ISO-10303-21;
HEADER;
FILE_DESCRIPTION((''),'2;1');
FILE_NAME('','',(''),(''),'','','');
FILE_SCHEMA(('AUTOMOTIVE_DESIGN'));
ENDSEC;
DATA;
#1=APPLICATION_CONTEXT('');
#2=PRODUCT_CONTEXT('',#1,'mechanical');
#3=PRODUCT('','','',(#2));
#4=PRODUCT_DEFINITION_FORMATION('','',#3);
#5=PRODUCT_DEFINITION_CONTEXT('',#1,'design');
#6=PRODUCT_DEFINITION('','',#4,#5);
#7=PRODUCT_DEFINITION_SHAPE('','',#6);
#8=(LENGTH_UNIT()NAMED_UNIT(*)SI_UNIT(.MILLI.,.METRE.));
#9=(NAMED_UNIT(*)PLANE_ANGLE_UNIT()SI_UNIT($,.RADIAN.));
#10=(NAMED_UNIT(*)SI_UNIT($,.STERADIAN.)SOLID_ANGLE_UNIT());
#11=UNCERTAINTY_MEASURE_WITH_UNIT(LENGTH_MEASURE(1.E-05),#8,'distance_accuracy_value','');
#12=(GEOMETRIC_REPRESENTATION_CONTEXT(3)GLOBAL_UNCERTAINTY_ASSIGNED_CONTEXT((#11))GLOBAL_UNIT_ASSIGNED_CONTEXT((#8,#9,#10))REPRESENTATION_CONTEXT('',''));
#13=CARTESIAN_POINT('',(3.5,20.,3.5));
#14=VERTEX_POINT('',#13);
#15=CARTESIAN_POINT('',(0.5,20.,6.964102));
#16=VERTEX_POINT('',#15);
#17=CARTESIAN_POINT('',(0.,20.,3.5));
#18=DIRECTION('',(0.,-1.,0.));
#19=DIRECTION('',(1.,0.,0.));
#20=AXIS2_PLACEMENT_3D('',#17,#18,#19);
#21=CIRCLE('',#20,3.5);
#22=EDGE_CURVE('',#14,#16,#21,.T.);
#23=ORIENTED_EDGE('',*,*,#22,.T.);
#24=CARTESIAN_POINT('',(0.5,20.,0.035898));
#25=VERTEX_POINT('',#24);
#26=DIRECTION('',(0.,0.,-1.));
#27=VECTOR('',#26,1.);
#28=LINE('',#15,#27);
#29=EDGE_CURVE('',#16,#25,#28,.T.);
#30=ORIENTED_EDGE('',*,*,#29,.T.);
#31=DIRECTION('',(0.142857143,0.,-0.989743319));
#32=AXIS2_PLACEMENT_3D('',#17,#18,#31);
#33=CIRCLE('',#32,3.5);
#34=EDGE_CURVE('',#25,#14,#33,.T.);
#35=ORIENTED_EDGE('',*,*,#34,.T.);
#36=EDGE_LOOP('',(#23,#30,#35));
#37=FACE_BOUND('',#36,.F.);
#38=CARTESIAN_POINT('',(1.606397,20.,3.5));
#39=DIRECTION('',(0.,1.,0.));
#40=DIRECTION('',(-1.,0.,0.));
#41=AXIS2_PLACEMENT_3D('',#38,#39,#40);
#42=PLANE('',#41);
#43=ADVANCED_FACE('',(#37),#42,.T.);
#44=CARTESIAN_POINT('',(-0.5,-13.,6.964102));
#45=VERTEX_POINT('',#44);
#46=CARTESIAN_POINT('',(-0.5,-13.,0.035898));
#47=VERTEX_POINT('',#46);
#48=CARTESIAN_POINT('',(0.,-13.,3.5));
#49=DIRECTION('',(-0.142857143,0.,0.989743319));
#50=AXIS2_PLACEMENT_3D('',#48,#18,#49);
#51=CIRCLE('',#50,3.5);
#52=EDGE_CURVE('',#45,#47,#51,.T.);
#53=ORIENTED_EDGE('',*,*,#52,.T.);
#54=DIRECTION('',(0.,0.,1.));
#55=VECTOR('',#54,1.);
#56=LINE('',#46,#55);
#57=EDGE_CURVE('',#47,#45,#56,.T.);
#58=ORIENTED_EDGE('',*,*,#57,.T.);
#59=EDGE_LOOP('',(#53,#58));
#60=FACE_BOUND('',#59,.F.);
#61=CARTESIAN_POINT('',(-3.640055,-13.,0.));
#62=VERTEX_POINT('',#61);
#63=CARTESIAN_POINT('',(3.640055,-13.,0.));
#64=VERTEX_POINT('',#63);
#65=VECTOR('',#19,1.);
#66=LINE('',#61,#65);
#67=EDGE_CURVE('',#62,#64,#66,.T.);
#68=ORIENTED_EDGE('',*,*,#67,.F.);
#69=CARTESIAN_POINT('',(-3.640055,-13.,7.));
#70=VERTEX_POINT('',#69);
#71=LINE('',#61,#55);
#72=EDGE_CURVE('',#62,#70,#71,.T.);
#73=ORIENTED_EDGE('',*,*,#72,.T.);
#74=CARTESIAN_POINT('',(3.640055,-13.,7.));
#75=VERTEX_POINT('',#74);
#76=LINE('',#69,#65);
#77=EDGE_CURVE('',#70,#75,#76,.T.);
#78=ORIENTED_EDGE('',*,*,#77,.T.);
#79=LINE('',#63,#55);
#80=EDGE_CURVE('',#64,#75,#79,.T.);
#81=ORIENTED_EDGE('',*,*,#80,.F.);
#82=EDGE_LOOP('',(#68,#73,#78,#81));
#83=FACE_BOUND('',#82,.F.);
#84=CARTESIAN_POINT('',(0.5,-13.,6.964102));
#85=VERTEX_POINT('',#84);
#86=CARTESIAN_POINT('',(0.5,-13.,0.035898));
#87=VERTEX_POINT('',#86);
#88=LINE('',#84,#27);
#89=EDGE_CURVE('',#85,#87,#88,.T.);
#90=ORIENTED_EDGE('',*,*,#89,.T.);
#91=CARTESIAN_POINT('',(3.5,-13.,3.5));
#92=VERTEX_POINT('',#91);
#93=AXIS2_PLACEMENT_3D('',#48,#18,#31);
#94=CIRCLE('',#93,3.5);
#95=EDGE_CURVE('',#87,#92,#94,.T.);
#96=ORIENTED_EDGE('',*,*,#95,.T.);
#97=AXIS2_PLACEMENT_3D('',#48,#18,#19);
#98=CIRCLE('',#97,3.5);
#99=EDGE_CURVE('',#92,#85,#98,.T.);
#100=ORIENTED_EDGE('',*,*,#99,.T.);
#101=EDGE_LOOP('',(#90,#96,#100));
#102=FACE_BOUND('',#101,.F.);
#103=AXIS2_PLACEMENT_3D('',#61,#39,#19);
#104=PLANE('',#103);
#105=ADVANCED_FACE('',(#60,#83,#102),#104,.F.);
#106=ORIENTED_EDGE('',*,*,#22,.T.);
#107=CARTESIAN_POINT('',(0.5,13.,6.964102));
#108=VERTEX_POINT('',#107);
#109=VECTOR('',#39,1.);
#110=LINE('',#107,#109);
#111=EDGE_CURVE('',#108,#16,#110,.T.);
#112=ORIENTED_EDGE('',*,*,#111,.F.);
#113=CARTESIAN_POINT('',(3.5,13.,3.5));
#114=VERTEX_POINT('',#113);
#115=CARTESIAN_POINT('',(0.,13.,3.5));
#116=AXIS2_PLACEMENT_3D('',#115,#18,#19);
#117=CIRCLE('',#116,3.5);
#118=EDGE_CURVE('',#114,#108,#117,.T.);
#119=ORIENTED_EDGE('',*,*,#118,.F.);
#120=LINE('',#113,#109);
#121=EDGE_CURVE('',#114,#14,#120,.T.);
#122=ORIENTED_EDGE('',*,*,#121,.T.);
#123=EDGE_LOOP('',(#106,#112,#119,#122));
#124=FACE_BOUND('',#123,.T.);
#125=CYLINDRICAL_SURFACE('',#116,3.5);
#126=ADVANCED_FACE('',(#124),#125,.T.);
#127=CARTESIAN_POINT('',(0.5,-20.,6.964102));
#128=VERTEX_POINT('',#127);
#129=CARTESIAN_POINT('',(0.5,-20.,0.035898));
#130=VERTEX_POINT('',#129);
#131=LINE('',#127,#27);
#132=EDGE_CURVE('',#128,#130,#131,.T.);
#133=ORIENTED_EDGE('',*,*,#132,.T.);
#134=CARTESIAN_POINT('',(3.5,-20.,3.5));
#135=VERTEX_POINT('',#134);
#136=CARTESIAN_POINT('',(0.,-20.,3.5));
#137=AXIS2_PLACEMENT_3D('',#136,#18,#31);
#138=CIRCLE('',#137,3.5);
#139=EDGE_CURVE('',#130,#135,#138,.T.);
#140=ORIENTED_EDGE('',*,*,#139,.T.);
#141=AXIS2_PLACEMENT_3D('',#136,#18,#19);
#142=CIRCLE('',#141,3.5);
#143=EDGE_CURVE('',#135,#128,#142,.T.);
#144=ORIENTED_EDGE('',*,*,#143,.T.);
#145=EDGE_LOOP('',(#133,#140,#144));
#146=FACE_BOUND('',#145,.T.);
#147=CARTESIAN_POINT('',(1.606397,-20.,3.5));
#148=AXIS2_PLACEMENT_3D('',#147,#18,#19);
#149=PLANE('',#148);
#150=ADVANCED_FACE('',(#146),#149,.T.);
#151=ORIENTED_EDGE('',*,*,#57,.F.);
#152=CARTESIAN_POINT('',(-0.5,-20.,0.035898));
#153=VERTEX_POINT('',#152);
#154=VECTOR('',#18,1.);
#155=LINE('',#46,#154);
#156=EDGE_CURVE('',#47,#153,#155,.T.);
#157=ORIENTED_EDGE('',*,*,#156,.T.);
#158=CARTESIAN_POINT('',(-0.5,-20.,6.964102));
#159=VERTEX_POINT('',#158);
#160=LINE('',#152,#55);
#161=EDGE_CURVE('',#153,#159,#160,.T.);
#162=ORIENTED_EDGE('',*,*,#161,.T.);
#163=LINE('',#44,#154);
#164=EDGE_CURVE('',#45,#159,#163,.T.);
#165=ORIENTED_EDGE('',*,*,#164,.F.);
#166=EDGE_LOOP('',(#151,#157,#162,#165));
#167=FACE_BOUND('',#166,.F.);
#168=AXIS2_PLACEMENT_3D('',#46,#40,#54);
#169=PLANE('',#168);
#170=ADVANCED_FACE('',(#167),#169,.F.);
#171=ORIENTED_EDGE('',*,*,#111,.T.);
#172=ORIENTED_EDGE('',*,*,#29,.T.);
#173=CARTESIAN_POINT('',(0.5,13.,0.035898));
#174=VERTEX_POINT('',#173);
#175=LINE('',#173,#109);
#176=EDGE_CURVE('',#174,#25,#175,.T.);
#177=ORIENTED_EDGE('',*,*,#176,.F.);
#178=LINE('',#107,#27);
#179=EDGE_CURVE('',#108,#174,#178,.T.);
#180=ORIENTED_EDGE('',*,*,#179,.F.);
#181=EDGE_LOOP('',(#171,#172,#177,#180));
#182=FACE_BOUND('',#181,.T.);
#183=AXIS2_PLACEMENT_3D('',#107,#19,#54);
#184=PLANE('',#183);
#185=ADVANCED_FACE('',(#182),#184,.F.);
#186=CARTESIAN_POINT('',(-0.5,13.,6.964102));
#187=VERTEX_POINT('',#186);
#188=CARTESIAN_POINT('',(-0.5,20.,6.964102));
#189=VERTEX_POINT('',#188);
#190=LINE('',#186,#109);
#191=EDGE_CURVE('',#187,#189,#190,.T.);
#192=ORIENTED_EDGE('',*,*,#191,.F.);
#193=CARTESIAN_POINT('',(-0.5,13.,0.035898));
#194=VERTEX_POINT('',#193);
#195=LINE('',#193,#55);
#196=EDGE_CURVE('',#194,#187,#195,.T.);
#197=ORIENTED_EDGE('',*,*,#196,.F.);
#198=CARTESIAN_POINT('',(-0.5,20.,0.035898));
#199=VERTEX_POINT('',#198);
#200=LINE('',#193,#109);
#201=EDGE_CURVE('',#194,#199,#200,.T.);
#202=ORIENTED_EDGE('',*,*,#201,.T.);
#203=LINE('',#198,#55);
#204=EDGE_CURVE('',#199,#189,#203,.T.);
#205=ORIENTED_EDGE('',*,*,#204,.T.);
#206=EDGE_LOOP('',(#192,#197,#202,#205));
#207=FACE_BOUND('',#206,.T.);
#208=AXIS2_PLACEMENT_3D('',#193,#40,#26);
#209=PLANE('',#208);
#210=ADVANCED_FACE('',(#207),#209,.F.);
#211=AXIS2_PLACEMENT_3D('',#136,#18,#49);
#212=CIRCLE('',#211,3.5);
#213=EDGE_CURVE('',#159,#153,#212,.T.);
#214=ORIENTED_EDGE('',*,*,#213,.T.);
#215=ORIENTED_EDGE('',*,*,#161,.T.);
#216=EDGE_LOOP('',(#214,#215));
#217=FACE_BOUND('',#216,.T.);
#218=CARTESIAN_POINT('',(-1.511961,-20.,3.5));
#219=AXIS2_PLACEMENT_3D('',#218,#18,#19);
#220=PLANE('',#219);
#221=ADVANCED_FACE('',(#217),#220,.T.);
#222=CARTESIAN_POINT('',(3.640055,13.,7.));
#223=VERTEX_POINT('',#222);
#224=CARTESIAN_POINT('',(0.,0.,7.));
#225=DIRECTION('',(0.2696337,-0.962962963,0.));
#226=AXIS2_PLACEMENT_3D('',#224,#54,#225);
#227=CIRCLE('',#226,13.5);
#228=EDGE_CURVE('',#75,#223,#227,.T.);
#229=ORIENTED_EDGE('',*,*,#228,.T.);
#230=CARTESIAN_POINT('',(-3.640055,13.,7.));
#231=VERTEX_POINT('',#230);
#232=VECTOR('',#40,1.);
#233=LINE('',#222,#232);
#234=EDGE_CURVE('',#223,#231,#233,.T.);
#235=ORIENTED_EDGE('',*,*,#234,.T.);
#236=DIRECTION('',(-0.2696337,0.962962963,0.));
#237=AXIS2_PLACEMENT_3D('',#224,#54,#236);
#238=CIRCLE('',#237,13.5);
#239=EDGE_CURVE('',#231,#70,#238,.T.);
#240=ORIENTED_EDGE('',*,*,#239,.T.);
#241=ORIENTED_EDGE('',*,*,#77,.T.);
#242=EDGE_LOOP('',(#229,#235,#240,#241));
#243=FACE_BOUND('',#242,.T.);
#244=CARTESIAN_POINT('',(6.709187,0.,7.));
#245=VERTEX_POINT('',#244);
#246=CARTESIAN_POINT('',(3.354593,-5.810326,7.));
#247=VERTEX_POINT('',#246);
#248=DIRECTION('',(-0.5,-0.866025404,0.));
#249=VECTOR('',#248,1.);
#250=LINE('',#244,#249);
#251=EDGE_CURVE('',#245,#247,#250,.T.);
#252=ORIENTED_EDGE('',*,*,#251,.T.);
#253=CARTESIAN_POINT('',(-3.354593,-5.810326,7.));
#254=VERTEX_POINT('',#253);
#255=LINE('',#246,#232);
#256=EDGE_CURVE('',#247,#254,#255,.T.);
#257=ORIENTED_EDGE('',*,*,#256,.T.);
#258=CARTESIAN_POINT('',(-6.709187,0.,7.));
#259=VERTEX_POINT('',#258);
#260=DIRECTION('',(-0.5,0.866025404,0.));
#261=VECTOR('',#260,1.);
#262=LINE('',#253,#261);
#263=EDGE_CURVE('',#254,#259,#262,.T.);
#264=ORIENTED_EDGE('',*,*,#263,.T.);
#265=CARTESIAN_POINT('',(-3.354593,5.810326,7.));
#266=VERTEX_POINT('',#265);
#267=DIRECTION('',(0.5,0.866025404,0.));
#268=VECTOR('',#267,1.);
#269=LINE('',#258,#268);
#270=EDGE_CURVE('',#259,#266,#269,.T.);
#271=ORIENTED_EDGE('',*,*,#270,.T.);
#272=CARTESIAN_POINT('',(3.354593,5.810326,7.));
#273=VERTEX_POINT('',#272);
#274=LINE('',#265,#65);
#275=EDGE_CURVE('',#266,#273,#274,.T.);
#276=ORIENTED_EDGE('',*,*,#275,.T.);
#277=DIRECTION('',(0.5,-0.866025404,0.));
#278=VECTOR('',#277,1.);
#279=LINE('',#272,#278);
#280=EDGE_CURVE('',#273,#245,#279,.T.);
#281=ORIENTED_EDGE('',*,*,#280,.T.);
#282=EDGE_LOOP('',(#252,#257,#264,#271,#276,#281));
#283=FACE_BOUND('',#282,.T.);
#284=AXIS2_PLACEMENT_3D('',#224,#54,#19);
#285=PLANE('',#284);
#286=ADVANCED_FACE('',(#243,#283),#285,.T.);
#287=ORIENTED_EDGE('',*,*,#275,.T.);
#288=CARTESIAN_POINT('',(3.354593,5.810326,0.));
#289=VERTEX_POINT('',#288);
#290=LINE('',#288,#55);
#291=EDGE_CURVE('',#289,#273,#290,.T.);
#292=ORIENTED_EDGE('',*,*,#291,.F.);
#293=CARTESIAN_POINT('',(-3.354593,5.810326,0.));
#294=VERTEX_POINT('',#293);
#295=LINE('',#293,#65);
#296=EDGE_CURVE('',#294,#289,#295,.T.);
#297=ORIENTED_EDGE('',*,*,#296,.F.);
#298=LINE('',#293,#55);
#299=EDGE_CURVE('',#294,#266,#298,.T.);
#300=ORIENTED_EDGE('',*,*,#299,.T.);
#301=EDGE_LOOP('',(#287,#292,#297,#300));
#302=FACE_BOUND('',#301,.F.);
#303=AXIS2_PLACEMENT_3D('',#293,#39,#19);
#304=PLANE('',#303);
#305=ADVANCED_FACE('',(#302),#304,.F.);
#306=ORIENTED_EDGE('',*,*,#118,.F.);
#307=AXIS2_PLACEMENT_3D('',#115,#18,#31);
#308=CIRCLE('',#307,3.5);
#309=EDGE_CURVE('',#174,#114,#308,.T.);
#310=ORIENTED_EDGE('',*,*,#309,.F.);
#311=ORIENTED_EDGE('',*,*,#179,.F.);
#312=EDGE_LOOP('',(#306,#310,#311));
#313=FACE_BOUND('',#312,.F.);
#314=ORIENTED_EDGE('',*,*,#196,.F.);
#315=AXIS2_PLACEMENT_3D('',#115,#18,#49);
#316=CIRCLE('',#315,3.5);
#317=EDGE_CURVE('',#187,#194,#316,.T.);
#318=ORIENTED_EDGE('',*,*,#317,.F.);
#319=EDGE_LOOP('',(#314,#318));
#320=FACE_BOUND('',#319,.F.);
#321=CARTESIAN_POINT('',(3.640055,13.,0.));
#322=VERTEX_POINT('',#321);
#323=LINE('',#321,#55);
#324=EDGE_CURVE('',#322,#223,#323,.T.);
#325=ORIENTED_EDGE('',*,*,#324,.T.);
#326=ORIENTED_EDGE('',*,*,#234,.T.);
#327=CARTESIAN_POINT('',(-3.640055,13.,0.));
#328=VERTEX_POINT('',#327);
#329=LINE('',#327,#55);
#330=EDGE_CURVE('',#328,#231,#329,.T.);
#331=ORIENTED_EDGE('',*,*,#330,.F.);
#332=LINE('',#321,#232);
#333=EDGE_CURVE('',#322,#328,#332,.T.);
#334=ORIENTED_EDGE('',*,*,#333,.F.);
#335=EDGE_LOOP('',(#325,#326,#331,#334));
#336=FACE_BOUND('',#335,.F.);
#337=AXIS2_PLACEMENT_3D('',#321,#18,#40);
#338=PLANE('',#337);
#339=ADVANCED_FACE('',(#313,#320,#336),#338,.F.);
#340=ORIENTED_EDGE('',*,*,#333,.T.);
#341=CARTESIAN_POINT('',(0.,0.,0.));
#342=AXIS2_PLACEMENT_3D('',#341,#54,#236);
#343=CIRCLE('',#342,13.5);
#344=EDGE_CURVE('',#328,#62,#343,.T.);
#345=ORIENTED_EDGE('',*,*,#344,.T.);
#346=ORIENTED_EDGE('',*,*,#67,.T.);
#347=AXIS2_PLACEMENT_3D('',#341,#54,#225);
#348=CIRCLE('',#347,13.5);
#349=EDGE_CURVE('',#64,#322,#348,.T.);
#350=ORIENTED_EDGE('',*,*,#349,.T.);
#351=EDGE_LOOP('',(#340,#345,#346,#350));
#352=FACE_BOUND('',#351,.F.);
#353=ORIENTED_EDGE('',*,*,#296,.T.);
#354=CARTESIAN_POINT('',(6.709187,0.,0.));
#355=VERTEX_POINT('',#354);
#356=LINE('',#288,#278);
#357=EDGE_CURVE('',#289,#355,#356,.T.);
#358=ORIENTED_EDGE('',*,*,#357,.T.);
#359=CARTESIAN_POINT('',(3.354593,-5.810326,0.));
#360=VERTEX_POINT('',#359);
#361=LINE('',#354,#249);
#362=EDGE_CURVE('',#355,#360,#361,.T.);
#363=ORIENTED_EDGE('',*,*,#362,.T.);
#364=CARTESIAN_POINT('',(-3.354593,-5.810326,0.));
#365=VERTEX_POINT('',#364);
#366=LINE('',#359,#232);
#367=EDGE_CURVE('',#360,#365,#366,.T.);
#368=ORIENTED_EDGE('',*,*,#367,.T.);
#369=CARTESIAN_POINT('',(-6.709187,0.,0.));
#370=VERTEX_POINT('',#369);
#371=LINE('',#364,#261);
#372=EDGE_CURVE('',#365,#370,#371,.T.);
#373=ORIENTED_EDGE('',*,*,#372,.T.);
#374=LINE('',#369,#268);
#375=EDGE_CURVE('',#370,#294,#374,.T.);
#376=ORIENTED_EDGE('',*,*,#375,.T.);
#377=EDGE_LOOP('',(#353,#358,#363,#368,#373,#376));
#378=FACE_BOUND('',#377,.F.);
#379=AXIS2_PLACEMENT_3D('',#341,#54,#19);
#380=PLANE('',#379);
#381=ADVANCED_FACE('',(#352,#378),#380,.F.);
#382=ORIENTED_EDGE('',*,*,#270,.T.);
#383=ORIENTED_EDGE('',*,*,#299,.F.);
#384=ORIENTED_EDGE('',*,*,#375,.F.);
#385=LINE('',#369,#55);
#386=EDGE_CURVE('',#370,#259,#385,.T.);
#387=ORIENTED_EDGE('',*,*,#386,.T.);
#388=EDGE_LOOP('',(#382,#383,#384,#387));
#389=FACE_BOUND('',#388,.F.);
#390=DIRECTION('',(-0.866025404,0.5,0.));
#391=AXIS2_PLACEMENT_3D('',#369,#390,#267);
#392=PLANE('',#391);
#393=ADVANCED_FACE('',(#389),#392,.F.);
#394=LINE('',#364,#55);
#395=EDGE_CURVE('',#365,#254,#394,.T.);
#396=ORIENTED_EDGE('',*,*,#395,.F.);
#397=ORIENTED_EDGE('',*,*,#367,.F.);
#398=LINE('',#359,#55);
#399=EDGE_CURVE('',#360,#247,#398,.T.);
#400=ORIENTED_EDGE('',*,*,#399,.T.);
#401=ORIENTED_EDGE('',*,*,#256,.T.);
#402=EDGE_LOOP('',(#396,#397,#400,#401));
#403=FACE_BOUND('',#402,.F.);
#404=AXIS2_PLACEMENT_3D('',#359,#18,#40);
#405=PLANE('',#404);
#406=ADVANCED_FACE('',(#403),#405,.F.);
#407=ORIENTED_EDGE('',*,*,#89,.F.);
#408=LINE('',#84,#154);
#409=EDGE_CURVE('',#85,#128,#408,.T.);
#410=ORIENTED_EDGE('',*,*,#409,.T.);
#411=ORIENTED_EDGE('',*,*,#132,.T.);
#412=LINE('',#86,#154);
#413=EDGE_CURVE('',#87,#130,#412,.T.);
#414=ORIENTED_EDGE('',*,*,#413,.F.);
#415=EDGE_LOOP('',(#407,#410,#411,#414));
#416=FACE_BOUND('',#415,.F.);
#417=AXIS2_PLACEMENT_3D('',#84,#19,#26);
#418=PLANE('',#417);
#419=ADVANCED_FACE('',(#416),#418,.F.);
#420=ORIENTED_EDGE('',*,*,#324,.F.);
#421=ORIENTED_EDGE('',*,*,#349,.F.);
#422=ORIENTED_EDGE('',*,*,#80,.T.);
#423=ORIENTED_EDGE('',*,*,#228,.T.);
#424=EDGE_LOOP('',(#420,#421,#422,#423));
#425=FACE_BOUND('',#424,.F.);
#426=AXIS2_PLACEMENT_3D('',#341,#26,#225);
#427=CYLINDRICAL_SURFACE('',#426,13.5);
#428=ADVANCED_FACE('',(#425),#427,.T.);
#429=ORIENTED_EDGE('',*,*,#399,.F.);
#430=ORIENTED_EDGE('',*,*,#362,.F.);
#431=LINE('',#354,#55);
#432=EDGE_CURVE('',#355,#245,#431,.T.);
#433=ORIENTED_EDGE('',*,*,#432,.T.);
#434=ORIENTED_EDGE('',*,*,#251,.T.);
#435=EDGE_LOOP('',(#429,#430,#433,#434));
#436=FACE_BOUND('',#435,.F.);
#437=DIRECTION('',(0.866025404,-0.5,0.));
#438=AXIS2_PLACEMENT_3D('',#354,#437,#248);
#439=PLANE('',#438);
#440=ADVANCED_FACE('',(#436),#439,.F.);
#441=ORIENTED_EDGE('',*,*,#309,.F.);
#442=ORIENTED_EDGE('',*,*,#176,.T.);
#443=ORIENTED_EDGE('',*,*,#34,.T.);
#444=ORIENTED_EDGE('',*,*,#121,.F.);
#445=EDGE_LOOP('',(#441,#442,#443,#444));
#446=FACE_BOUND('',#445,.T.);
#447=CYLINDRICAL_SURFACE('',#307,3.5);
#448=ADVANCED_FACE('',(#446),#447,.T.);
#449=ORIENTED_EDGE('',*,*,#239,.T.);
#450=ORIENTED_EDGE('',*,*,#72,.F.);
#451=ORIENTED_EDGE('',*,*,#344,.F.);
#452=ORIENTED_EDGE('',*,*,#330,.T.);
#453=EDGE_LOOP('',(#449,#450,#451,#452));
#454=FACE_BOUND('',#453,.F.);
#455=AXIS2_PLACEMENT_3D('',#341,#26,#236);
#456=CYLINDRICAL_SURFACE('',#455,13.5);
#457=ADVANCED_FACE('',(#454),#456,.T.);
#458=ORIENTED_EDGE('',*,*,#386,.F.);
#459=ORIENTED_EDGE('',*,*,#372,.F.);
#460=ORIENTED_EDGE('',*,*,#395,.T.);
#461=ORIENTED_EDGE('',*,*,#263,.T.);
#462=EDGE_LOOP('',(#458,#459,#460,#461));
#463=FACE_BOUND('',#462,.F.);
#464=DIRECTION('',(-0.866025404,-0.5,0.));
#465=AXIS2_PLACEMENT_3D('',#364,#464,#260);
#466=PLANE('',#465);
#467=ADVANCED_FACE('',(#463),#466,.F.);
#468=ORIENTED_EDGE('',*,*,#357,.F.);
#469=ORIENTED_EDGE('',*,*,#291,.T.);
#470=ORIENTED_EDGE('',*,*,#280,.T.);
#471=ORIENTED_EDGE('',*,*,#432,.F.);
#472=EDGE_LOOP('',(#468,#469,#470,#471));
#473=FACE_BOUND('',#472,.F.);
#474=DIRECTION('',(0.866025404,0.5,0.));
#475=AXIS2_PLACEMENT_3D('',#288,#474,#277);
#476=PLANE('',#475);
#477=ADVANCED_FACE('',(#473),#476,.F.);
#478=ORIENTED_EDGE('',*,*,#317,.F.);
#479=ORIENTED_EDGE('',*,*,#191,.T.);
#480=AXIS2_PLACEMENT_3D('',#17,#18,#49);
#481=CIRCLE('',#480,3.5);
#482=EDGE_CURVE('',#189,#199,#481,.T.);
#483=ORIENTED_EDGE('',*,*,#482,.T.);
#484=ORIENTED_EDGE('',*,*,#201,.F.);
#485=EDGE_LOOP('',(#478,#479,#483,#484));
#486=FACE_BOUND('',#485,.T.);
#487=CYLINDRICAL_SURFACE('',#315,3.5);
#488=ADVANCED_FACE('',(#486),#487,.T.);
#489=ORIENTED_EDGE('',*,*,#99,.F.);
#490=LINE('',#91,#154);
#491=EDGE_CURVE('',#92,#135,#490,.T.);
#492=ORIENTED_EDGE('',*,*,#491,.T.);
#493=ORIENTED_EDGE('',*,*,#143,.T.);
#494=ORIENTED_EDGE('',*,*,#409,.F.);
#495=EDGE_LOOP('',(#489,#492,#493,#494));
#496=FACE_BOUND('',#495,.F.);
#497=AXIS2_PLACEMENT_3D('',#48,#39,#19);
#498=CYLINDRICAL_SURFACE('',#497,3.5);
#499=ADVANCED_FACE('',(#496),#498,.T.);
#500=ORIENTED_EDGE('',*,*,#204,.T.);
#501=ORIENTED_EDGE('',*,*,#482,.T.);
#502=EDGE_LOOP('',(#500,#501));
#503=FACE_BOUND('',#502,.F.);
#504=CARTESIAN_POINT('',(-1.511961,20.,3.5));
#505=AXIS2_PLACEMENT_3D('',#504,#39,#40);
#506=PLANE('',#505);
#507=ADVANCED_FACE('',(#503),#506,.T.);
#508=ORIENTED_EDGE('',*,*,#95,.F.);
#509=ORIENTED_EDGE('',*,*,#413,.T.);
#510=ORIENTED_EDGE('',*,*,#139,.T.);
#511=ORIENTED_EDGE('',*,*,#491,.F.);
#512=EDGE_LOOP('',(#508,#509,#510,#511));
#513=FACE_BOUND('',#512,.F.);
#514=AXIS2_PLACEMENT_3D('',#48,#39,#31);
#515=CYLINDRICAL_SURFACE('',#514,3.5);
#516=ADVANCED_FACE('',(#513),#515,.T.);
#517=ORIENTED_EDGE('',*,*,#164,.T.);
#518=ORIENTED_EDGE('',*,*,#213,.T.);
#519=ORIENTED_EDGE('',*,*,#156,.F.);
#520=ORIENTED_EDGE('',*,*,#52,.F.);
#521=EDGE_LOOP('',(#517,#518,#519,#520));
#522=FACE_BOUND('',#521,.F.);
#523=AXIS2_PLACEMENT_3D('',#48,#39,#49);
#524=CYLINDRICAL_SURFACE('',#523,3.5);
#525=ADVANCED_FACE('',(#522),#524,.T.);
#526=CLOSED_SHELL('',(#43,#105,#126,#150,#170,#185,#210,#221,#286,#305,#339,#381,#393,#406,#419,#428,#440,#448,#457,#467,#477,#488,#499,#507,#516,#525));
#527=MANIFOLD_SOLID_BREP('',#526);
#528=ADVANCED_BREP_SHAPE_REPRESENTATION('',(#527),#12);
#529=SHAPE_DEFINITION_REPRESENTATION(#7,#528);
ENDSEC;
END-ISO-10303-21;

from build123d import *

# Parameters (mm, degrees)
F1_DEPTH = 7
F3_DEPTH = 7


# Not quite as in the source:
# - a pattern or mirror of a feature is missing from the dataset's text; its kind, count and spacing are read off the source's solid


with BuildPart() as f1:
    # F0 (on Top) → F1 (new body)
    with BuildSketch(Plane.XY):
        with BuildLine():
            Line((3.6400549446, 13), (-3.6400549446, 13))
            ThreePointArc((-3.6400549446, 13), (-13.5, 0), (-3.6400549446, -13))
            Line((-3.6400549446, -13), (3.6400549446, -13))
            ThreePointArc((3.6400549446, -13), (13.5, 0), (3.6400549446, 13))
        make_face()
        Polygon((-6.7091866291, 0), (-3.3545933146, 5.8103260596), (3.3545933146, 5.8103260596), (6.7091866291, 0), (3.3545933146, -5.8103260596), (-3.3545933146, -5.8103260596), align=None, mode=Mode.SUBTRACT)
    extrude(amount=F1_DEPTH)

    # F2 (on face) → F3 (join)
    with BuildSketch(Plane.XZ.offset(13)):
        with BuildLine():
            Line((-0.5, 0.0358983849), (-0.5, 6.9641016151))
            ThreePointArc((-0.5, 6.9641016151), (-3.5, 3.5), (-0.5, 0.0358983849))
        make_face()
        with BuildLine():
            ThreePointArc((0.5, 0.0358983849), (2.6457513111, 1.2087121525), (3.5, 3.5))
            ThreePointArc((3.5, 3.5), (2.6457513111, 5.7912878475), (0.5, 6.9641016151))
            Line((0.5, 6.9641016151), (0.5, 0.0358983849))
        make_face()
    f3 = extrude(amount=F3_DEPTH)

    # F3_copies: F3 across plane
    add(f3.mirror(Plane.ZX))


solid = f1.part
